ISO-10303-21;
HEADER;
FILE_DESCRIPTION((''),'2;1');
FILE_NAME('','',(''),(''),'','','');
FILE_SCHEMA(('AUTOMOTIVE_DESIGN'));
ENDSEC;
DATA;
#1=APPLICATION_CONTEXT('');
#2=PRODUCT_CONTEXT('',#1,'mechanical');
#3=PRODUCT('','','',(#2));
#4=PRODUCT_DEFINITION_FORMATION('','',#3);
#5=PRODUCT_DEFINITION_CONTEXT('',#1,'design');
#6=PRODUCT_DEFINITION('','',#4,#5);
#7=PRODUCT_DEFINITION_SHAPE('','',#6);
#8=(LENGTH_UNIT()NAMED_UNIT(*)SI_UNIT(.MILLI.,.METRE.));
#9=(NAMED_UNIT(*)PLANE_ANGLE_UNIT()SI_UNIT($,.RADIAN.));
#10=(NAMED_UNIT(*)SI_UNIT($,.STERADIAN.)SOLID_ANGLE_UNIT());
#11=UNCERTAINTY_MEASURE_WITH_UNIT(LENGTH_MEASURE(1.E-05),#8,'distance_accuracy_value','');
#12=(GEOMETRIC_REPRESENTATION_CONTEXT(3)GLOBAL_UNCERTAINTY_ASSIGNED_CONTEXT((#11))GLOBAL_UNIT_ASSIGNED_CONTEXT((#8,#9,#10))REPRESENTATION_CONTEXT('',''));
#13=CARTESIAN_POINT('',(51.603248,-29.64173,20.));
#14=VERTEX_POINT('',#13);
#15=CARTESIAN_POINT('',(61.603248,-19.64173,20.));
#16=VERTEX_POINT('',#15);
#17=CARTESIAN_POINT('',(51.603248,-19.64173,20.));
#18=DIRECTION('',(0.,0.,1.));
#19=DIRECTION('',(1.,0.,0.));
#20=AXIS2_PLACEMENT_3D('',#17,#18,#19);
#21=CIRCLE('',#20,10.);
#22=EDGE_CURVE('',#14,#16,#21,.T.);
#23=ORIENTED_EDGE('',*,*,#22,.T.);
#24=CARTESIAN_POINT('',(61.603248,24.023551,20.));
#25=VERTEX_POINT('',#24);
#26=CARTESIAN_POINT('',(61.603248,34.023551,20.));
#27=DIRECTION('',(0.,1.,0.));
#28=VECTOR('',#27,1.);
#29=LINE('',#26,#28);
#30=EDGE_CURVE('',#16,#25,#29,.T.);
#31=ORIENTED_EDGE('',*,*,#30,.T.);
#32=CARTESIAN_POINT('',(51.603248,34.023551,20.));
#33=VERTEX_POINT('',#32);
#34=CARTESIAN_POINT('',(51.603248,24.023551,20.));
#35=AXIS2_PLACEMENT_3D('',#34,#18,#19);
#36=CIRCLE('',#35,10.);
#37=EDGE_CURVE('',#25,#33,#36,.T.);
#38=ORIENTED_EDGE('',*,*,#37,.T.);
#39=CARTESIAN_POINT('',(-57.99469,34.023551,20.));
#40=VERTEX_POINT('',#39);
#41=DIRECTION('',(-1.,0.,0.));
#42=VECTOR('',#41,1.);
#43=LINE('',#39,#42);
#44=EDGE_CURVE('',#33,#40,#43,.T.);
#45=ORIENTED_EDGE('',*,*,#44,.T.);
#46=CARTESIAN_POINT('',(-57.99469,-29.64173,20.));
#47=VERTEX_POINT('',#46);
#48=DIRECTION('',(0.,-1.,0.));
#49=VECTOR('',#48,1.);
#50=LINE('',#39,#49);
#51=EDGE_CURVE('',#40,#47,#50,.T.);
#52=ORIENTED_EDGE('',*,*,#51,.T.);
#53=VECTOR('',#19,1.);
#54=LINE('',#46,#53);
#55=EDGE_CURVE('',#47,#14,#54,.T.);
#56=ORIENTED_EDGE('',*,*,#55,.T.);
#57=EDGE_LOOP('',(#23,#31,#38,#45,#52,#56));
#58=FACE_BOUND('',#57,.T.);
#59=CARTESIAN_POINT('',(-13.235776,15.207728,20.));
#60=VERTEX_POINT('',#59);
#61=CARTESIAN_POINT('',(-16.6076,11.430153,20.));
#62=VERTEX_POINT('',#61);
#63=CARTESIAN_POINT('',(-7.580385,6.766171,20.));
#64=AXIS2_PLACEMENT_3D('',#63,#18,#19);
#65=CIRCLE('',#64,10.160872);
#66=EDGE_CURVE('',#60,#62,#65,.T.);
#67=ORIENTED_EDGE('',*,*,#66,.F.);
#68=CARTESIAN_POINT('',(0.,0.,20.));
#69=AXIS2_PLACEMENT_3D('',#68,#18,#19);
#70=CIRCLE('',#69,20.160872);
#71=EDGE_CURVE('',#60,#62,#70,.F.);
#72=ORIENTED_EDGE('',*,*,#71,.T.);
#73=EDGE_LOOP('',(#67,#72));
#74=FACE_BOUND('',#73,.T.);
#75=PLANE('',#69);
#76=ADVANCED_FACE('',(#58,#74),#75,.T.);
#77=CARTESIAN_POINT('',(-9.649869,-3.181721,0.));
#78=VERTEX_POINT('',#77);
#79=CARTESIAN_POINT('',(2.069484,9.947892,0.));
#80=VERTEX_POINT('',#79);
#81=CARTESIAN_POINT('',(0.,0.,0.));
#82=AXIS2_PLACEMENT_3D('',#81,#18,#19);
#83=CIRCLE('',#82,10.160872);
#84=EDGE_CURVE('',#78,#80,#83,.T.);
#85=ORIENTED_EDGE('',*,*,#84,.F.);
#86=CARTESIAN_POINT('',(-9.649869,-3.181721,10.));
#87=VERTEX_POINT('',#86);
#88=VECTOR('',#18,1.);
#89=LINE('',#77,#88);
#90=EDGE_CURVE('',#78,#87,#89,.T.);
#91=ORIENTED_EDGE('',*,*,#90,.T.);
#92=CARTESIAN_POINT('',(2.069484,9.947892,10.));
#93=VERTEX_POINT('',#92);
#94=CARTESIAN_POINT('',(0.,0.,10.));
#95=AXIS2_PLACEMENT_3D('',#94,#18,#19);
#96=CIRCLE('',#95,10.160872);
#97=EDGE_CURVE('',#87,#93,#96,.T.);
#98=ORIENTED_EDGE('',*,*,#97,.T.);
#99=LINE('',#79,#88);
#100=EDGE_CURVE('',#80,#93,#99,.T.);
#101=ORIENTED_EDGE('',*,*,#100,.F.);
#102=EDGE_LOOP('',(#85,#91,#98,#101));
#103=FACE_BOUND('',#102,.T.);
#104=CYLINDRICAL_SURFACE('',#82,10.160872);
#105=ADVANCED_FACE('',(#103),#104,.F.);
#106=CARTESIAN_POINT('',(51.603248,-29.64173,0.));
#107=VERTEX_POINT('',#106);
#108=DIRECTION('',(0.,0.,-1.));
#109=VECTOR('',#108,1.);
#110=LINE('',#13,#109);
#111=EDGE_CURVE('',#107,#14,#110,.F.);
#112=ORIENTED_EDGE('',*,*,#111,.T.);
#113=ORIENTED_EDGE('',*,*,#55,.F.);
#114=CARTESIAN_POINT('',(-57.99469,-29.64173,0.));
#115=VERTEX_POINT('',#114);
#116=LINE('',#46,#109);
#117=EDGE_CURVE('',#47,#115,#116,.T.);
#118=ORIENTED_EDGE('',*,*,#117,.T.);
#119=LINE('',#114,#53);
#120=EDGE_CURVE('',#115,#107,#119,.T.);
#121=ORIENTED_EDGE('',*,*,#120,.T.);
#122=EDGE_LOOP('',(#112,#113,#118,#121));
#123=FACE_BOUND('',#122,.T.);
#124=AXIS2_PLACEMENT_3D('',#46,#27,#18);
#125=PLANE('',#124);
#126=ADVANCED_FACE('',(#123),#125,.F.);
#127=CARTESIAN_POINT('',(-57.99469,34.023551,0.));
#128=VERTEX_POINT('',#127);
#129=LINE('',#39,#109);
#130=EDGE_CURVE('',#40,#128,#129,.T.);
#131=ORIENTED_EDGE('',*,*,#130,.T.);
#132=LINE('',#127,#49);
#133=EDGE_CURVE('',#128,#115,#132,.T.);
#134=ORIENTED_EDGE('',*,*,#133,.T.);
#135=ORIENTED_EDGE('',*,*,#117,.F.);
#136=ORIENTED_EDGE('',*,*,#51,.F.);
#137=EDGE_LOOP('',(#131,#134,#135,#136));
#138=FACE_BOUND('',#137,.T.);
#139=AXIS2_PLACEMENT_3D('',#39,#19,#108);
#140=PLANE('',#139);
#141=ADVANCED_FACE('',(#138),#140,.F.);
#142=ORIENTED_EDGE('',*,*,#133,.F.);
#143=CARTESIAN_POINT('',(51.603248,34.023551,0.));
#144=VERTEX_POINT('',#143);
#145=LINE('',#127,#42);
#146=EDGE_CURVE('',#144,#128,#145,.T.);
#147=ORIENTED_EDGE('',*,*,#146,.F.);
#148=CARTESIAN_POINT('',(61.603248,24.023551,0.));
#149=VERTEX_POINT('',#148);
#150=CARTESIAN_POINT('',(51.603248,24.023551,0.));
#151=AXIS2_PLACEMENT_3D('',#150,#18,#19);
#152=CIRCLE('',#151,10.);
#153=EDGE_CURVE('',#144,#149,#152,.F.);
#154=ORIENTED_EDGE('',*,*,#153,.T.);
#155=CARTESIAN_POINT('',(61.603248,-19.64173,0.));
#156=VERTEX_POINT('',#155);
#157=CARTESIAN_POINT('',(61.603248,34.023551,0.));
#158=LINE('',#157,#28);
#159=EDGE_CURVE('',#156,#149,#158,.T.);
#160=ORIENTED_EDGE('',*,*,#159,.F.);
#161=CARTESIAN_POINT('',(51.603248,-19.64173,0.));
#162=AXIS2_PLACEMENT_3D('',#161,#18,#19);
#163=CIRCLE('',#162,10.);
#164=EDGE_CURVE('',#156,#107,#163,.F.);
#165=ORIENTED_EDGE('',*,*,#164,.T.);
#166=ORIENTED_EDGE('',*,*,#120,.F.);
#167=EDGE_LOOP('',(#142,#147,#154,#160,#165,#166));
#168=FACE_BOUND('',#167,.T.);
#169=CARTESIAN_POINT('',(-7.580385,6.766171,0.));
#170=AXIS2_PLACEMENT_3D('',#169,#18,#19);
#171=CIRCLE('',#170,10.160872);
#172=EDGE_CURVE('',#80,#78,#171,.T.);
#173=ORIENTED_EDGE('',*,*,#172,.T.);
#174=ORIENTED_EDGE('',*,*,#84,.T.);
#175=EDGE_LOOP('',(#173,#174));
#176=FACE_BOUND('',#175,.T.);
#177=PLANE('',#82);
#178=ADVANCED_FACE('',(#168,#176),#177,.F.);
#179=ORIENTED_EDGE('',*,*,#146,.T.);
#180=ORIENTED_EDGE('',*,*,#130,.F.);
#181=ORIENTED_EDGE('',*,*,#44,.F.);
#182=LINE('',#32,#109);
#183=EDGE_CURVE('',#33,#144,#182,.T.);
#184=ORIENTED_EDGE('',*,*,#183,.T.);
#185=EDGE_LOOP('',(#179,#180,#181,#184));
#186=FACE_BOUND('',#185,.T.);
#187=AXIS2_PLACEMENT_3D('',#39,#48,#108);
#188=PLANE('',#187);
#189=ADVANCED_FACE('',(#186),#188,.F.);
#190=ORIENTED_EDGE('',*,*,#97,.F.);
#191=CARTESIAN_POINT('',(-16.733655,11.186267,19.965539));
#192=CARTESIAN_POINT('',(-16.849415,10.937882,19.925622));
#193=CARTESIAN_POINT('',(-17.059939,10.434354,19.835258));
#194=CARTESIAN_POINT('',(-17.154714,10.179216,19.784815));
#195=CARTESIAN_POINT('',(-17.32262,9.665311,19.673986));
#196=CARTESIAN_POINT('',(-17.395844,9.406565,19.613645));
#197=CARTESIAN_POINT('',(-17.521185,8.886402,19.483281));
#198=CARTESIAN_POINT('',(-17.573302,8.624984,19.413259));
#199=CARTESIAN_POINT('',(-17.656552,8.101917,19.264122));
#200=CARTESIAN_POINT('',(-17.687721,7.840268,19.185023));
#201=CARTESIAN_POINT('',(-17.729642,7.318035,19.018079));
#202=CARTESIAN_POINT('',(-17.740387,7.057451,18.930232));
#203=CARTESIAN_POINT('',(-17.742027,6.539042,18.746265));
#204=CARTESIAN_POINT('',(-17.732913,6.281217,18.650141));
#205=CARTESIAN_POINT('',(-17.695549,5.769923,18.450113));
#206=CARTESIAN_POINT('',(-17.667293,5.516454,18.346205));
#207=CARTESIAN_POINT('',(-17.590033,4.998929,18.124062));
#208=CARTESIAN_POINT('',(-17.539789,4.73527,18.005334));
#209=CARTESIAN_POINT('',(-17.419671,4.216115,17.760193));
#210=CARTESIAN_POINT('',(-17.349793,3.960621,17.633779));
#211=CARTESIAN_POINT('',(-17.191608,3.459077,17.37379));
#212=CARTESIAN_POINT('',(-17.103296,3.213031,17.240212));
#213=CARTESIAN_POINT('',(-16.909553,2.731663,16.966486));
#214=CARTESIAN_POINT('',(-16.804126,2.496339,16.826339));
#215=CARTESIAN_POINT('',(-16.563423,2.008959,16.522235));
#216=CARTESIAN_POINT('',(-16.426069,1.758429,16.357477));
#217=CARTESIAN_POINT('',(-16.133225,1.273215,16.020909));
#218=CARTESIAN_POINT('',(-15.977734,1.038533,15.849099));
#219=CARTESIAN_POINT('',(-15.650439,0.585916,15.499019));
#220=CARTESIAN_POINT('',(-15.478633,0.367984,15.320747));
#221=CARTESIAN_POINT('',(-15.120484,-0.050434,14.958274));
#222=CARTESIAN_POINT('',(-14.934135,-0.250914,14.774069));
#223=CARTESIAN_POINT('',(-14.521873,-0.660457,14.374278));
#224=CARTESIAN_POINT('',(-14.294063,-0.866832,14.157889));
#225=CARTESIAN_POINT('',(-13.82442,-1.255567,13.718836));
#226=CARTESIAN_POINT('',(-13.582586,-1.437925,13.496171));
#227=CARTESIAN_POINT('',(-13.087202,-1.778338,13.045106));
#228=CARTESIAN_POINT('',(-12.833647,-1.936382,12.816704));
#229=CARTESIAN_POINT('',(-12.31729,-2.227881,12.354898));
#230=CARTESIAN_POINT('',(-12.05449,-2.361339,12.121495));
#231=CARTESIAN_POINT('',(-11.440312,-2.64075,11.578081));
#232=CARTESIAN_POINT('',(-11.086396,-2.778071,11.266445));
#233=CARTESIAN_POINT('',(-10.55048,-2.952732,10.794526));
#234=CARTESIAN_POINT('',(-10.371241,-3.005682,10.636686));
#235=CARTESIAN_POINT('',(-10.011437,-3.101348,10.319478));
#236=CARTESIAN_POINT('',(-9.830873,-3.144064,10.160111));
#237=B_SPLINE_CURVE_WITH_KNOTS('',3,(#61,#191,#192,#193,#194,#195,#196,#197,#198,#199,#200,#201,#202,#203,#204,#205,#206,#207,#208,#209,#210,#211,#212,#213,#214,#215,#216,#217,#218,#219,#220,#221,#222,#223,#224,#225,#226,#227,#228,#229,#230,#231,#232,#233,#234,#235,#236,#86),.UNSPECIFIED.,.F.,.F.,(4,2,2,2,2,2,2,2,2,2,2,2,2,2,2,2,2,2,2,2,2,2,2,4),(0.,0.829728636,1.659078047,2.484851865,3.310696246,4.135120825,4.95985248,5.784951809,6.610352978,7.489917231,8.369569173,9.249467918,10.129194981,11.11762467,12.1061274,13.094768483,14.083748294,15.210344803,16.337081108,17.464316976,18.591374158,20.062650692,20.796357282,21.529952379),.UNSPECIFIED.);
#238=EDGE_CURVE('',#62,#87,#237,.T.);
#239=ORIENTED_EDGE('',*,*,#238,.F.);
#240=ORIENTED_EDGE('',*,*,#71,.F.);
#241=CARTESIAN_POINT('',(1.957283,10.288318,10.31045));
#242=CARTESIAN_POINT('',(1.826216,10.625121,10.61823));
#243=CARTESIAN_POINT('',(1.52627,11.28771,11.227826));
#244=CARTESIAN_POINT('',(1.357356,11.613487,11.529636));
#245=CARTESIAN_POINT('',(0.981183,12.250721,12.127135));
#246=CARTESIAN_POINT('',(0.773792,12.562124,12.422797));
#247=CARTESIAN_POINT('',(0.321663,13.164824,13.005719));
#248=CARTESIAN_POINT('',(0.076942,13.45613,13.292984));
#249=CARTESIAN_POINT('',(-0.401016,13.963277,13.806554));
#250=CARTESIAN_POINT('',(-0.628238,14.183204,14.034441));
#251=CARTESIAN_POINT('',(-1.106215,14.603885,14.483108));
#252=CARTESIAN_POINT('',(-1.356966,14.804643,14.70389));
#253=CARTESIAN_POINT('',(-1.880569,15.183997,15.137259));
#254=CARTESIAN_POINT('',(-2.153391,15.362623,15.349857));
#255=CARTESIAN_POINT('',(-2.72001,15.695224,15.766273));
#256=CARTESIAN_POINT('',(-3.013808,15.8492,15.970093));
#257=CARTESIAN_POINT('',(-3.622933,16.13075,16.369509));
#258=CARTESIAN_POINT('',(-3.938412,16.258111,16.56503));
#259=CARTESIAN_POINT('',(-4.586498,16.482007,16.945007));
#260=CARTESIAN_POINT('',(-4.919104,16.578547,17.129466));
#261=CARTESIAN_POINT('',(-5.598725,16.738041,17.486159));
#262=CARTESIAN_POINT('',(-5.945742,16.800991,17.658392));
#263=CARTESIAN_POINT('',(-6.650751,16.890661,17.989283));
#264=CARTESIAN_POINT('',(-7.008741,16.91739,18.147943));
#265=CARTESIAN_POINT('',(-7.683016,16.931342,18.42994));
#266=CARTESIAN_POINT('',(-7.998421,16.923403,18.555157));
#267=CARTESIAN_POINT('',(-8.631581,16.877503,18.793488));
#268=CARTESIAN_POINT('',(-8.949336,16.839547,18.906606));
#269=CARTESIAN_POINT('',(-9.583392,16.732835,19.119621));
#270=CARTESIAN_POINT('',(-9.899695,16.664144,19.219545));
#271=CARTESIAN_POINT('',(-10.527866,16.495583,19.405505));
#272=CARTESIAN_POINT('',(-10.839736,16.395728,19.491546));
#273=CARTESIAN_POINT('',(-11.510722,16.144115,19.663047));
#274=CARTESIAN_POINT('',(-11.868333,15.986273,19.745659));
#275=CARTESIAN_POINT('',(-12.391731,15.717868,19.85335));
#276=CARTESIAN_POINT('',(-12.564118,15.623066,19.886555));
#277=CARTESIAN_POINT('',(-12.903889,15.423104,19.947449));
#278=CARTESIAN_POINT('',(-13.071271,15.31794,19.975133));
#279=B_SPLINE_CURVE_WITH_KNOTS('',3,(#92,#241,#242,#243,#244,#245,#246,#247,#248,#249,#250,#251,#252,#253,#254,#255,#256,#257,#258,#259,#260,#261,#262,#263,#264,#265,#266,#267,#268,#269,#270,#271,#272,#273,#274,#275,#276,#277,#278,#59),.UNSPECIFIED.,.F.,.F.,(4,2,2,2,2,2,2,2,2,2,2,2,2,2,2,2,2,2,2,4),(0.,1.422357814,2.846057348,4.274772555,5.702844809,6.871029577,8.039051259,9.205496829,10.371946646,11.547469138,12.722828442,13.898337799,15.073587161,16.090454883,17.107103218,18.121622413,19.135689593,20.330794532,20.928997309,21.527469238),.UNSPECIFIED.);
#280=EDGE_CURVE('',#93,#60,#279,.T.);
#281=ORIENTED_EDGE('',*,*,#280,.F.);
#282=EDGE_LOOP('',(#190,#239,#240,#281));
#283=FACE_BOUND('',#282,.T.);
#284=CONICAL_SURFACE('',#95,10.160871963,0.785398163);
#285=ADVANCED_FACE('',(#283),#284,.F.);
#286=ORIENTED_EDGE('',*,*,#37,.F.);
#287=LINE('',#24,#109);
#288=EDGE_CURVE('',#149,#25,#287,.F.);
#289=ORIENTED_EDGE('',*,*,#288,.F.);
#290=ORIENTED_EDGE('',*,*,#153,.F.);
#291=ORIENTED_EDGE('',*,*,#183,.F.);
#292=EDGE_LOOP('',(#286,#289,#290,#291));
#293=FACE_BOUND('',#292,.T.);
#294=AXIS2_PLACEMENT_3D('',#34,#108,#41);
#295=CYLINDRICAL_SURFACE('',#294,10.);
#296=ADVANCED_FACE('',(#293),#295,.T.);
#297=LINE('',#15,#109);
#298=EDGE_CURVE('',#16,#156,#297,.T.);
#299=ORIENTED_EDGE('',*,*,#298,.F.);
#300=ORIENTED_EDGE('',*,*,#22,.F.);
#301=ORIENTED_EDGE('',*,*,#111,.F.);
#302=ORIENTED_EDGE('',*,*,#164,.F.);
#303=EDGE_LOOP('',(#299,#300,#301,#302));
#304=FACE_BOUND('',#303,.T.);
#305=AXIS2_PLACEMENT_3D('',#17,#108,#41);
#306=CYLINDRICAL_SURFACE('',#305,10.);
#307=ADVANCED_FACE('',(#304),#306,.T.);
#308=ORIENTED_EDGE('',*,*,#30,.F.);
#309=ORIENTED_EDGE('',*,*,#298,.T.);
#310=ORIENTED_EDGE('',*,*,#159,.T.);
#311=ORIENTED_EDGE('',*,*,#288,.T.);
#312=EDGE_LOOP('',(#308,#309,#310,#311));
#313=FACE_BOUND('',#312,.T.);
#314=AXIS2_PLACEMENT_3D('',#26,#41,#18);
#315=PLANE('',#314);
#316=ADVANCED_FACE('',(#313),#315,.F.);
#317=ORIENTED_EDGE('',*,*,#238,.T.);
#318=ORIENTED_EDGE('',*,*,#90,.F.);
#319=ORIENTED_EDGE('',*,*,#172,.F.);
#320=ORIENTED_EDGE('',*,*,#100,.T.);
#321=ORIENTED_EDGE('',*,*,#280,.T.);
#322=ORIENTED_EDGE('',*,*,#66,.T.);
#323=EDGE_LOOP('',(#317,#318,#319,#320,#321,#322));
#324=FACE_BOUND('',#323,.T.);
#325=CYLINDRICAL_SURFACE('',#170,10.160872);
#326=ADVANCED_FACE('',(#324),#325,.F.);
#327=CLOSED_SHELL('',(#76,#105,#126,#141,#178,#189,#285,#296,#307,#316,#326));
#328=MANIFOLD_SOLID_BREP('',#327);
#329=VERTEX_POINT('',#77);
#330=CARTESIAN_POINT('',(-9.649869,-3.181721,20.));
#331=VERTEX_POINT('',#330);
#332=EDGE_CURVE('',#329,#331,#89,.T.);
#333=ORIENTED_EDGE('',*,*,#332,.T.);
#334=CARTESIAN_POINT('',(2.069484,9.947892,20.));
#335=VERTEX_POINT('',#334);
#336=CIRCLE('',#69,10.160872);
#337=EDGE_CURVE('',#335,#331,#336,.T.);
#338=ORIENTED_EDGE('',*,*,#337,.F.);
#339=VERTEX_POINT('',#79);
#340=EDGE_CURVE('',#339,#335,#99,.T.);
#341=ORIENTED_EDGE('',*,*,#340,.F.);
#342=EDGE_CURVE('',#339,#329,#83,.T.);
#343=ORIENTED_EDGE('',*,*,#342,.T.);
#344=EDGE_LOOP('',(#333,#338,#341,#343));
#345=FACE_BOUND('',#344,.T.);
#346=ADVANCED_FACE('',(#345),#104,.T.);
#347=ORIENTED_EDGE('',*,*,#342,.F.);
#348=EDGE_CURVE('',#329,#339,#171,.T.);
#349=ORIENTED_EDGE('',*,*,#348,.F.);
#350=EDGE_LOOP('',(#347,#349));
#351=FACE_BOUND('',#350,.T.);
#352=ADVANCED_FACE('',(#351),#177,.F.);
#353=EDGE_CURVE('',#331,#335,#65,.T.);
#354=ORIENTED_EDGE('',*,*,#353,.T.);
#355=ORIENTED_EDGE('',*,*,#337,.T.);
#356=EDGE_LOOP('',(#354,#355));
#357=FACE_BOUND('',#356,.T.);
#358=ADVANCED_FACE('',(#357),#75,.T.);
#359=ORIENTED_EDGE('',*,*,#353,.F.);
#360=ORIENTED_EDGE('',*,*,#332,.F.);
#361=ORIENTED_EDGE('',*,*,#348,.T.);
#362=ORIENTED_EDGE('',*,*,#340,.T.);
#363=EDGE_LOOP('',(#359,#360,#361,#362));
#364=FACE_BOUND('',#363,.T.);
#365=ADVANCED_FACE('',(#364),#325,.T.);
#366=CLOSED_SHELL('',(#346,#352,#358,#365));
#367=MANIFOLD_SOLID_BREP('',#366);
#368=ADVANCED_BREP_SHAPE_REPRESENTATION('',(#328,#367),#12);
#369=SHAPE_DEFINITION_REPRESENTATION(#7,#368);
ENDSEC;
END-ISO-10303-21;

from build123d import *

# Parameters (mm, degrees)
SKETCH1_W           = 119.597938106
SKETCH1_H           = 63.665281708
BOSS_EXTRUDE1_DEPTH = 20
FILLET1_R           = 10
FILLET2_R           = 10
CUT_EXTRUDE1_DEPTH  = 20
CHAMFER1_SIZE       = 10


with BuildPart() as part:
    # Sketch1 → Boss-Extrude1 (new body)
    with BuildSketch(Plane.XY):
        with Locations((1.804279239, 2.190910504)):
            Rectangle(SKETCH1_W, SKETCH1_H)
    extrude(amount=BOSS_EXTRUDE1_DEPTH)

    # Fillet1
    fillet1_edges = [part.edges().sort_by_distance(p)[0] for p in [
        (61.603248292, 34.023551358, 10),
    ]]
    fillet(fillet1_edges, radius=FILLET1_R)

    # Fillet2
    fillet2_edges = [part.edges().sort_by_distance(p)[0] for p in [
        (61.603248292, -29.64173035, 10),
    ]]
    fillet(fillet2_edges, radius=FILLET2_R)

    # Sketch2 → Cut-Extrude1 (cut)
    with BuildSketch(Plane.XY.offset(20)):
        with BuildLine():
            ThreePointArc((-9.649869077, -3.18172058), (7.580385389, -6.766171474), (2.069483688, 9.947892054))
            ThreePointArc((2.069483688, 9.947892054), (0, 0), (-9.649869077, -3.18172058))
        make_face()
        with BuildLine():
            ThreePointArc((-9.649869077, -3.18172058), (-7.580385389, 6.766171474), (2.069483688, 9.947892054))
            ThreePointArc((2.069483688, 9.947892054), (-15.160770777, 13.532342947), (-9.649869077, -3.18172058))
        make_face()
    extrude(amount=-CUT_EXTRUDE1_DEPTH, mode=Mode.SUBTRACT)

    # Chamfer1
    # the kernel refuses this chamfer: 10 mm, written as the material it takes off along each edge
    with BuildSketch(Plane(origin=(0, 0, 20), x_dir=(-0.7481252128924886, 0.6635575829078957, 0), z_dir=(0.6635575829078957, 0.7481252128924886, 0))) as chamfer1_piece_1:
        Polygon((10.160871963, -CHAMFER1_SIZE), (10.160871963 + CHAMFER1_SIZE, 0), (10.160871963, 0), align=None)
    revolve(axis=Axis((0, 0, 20), (0, 0, 1)), revolution_arc=359.64, mode=Mode.SUBTRACT)


solid = part.part
